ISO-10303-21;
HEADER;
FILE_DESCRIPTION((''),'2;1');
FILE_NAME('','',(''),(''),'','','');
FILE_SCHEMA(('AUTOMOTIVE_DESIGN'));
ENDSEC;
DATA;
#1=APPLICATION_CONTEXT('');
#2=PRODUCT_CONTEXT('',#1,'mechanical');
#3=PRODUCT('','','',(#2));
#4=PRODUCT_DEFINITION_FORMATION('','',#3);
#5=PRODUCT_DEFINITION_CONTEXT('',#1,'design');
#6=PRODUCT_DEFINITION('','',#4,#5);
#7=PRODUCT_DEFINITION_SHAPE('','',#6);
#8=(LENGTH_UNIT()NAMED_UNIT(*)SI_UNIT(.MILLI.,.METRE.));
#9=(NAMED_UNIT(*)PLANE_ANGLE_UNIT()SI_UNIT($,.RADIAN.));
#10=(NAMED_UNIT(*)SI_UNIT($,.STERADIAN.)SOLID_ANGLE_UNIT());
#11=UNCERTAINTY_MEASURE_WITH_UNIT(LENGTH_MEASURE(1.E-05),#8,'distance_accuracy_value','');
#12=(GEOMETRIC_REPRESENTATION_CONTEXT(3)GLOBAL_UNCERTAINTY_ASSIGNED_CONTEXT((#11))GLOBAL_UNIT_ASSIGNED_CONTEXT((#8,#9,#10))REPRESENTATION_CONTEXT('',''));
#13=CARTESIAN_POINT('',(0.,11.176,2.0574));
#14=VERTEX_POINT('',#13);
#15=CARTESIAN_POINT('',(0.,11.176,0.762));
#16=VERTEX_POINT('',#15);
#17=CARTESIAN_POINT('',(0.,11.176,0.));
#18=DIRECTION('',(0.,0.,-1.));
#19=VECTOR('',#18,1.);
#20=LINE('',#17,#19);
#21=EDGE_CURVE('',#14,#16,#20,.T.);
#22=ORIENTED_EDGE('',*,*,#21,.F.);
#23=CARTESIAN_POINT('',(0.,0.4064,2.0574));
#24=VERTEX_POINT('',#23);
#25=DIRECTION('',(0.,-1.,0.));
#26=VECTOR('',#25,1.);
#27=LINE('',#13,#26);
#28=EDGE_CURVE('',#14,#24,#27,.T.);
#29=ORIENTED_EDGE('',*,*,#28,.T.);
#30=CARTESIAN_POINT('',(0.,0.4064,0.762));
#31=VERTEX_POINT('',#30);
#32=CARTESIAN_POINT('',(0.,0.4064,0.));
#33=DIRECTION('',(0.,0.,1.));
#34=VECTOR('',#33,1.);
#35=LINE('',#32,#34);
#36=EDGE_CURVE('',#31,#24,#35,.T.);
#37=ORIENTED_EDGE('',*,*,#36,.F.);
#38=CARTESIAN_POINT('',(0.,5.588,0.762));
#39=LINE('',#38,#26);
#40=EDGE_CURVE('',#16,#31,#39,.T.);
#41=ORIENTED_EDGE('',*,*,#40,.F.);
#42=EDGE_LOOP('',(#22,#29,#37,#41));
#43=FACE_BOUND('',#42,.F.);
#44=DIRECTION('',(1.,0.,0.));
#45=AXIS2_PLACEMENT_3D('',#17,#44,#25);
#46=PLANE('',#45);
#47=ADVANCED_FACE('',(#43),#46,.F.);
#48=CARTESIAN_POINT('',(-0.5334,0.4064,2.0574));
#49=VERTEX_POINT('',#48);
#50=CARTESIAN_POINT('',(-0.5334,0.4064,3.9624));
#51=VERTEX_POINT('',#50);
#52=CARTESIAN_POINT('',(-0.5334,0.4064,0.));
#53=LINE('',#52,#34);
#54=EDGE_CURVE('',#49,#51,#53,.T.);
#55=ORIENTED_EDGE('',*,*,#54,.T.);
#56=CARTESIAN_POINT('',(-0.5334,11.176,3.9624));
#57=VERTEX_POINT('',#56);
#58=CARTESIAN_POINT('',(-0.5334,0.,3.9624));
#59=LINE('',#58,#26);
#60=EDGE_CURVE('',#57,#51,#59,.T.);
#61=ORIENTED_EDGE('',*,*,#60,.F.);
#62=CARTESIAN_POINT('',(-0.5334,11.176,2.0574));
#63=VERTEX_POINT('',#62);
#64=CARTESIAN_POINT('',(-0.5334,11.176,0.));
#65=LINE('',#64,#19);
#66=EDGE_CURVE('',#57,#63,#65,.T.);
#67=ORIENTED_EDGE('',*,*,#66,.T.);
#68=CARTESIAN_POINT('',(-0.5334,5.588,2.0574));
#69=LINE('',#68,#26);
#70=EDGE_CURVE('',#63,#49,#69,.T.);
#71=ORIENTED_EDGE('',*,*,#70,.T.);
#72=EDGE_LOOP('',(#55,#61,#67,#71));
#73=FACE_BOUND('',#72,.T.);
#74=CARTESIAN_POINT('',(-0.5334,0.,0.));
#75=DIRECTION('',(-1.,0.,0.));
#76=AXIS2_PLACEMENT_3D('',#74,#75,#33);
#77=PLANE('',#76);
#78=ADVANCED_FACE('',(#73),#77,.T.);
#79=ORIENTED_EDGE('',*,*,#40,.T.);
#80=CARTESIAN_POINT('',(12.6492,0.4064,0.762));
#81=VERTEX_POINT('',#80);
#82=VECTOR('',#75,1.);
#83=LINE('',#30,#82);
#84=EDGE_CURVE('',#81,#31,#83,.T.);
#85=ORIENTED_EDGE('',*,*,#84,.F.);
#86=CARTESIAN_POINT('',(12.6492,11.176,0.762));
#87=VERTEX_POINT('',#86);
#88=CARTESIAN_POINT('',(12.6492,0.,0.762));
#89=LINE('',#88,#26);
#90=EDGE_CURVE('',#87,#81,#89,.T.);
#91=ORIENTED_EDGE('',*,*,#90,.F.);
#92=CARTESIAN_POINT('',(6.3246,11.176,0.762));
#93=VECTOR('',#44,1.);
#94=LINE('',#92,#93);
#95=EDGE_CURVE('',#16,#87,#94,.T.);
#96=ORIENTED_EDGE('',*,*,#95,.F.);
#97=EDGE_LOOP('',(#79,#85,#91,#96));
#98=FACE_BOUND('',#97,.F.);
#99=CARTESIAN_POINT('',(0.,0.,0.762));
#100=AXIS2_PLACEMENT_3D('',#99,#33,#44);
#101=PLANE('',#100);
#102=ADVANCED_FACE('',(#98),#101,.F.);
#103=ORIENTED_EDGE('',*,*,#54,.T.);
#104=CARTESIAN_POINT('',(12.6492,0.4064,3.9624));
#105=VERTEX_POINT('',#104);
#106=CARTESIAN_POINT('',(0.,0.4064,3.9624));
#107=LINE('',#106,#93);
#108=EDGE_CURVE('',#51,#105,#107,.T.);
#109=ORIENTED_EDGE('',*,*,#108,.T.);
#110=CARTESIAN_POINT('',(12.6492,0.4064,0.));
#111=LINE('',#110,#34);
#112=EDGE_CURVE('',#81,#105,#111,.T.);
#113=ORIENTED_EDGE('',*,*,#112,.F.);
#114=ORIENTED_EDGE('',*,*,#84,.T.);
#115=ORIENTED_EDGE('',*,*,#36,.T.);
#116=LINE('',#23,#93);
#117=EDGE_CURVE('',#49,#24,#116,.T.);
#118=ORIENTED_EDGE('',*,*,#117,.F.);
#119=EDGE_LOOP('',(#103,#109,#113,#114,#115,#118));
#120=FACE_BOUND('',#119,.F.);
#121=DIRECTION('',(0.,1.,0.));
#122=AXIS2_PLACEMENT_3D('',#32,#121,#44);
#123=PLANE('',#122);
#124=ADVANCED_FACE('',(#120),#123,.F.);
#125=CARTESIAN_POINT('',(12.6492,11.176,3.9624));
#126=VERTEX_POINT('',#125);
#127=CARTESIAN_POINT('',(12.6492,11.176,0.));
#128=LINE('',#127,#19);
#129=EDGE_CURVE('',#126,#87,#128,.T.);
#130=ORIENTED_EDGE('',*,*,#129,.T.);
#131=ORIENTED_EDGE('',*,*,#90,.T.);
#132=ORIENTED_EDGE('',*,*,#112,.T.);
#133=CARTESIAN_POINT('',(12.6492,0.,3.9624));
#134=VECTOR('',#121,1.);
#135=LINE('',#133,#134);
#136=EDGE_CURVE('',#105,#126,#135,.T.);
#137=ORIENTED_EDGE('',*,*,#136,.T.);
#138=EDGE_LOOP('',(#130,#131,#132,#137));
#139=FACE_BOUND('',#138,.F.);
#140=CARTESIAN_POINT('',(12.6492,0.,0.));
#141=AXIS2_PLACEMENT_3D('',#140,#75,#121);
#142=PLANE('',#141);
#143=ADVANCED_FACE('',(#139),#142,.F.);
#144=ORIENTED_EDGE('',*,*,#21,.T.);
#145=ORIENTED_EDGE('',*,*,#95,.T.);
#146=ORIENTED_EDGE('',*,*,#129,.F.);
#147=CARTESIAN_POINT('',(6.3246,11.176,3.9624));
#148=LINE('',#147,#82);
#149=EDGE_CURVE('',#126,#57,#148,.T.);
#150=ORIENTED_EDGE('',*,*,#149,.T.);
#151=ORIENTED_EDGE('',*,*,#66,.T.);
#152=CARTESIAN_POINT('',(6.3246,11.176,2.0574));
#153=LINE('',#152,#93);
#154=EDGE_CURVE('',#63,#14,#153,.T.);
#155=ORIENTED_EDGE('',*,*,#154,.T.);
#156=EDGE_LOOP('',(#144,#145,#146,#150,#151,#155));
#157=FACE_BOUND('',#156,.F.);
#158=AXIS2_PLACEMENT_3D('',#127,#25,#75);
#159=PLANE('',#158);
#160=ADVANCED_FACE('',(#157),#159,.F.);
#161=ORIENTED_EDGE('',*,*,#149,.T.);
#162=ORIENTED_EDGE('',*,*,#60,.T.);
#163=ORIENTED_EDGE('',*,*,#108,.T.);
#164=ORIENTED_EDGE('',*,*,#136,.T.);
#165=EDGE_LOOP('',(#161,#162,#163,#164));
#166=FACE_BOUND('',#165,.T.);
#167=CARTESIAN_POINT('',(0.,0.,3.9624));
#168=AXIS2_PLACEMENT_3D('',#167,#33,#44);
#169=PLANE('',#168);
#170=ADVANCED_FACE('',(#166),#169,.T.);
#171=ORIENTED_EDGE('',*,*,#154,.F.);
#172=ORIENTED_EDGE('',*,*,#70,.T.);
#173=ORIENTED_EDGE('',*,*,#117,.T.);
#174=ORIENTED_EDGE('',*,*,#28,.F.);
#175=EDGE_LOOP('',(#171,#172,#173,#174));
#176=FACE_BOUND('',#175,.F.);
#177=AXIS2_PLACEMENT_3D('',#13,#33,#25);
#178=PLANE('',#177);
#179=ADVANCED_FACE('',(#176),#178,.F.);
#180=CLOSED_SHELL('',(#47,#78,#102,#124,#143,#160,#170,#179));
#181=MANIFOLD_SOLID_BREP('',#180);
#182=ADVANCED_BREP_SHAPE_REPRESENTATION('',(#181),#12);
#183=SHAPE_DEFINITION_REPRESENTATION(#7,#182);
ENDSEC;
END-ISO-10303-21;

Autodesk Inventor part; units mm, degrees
ref_plane "YZ Plane" through (0, 0, 0) normal (1, 0, 0) x (0, 1, 0)
ref_plane "XZ Plane" through (0, 0, 0) normal (0, 1, 0) x (-1, 0, 0)
sketch "Sketch1" plane through (0, 0, 0) normal (0, 0, 1) x (1, 0, 0)
  line L0 (0, 0) -> (12.6492, 0)
  line L1 (12.6492, 0) -> (12.6492, 11.176)
  line L2 (12.6492, 11.176) -> (0, 11.176)
  line L3 (0, 11.176) -> (0, 0)
  dimension "d0" = 12.6492
  dimension "d1" = 11.176
extrude "Extrusion1" add sketch "Sketch1" along normal blind 3.9624
sketch "Sketch2" plane through (0, 0, 0) normal (-1, 0, 0) x (0, 0, 1)
  line L0 (0, 0) -> (3.9624, 0) projected
  line L1 (3.9624, 11.176) -> (2.0574, 11.176)
  line L2 (2.0574, 11.176) -> (2.0574, 0)
  line L3 (2.0574, 0) -> (3.9624, 0)
  line L4 (3.9624, 0) -> (3.9624, 11.176)
  dimension "d4" = 1.905
ref_plane "Work Plane1" through (-0.5334, -0.3048, 5.08) normal (-1, 0, 0) x (0, 0, 1)
extrude "Extrusion2" add sketch "Sketch2" along normal up to surface (0.5334 mm away)
move faces "Move Face1" translate (0, 0.4064, 0) faces at (8.4328, 0, 2.0066)
move faces "Move Face2" translate (0, 0, 0.762) faces at (4.2164, 7.5861, 0)
properties part number "body_encoder"
